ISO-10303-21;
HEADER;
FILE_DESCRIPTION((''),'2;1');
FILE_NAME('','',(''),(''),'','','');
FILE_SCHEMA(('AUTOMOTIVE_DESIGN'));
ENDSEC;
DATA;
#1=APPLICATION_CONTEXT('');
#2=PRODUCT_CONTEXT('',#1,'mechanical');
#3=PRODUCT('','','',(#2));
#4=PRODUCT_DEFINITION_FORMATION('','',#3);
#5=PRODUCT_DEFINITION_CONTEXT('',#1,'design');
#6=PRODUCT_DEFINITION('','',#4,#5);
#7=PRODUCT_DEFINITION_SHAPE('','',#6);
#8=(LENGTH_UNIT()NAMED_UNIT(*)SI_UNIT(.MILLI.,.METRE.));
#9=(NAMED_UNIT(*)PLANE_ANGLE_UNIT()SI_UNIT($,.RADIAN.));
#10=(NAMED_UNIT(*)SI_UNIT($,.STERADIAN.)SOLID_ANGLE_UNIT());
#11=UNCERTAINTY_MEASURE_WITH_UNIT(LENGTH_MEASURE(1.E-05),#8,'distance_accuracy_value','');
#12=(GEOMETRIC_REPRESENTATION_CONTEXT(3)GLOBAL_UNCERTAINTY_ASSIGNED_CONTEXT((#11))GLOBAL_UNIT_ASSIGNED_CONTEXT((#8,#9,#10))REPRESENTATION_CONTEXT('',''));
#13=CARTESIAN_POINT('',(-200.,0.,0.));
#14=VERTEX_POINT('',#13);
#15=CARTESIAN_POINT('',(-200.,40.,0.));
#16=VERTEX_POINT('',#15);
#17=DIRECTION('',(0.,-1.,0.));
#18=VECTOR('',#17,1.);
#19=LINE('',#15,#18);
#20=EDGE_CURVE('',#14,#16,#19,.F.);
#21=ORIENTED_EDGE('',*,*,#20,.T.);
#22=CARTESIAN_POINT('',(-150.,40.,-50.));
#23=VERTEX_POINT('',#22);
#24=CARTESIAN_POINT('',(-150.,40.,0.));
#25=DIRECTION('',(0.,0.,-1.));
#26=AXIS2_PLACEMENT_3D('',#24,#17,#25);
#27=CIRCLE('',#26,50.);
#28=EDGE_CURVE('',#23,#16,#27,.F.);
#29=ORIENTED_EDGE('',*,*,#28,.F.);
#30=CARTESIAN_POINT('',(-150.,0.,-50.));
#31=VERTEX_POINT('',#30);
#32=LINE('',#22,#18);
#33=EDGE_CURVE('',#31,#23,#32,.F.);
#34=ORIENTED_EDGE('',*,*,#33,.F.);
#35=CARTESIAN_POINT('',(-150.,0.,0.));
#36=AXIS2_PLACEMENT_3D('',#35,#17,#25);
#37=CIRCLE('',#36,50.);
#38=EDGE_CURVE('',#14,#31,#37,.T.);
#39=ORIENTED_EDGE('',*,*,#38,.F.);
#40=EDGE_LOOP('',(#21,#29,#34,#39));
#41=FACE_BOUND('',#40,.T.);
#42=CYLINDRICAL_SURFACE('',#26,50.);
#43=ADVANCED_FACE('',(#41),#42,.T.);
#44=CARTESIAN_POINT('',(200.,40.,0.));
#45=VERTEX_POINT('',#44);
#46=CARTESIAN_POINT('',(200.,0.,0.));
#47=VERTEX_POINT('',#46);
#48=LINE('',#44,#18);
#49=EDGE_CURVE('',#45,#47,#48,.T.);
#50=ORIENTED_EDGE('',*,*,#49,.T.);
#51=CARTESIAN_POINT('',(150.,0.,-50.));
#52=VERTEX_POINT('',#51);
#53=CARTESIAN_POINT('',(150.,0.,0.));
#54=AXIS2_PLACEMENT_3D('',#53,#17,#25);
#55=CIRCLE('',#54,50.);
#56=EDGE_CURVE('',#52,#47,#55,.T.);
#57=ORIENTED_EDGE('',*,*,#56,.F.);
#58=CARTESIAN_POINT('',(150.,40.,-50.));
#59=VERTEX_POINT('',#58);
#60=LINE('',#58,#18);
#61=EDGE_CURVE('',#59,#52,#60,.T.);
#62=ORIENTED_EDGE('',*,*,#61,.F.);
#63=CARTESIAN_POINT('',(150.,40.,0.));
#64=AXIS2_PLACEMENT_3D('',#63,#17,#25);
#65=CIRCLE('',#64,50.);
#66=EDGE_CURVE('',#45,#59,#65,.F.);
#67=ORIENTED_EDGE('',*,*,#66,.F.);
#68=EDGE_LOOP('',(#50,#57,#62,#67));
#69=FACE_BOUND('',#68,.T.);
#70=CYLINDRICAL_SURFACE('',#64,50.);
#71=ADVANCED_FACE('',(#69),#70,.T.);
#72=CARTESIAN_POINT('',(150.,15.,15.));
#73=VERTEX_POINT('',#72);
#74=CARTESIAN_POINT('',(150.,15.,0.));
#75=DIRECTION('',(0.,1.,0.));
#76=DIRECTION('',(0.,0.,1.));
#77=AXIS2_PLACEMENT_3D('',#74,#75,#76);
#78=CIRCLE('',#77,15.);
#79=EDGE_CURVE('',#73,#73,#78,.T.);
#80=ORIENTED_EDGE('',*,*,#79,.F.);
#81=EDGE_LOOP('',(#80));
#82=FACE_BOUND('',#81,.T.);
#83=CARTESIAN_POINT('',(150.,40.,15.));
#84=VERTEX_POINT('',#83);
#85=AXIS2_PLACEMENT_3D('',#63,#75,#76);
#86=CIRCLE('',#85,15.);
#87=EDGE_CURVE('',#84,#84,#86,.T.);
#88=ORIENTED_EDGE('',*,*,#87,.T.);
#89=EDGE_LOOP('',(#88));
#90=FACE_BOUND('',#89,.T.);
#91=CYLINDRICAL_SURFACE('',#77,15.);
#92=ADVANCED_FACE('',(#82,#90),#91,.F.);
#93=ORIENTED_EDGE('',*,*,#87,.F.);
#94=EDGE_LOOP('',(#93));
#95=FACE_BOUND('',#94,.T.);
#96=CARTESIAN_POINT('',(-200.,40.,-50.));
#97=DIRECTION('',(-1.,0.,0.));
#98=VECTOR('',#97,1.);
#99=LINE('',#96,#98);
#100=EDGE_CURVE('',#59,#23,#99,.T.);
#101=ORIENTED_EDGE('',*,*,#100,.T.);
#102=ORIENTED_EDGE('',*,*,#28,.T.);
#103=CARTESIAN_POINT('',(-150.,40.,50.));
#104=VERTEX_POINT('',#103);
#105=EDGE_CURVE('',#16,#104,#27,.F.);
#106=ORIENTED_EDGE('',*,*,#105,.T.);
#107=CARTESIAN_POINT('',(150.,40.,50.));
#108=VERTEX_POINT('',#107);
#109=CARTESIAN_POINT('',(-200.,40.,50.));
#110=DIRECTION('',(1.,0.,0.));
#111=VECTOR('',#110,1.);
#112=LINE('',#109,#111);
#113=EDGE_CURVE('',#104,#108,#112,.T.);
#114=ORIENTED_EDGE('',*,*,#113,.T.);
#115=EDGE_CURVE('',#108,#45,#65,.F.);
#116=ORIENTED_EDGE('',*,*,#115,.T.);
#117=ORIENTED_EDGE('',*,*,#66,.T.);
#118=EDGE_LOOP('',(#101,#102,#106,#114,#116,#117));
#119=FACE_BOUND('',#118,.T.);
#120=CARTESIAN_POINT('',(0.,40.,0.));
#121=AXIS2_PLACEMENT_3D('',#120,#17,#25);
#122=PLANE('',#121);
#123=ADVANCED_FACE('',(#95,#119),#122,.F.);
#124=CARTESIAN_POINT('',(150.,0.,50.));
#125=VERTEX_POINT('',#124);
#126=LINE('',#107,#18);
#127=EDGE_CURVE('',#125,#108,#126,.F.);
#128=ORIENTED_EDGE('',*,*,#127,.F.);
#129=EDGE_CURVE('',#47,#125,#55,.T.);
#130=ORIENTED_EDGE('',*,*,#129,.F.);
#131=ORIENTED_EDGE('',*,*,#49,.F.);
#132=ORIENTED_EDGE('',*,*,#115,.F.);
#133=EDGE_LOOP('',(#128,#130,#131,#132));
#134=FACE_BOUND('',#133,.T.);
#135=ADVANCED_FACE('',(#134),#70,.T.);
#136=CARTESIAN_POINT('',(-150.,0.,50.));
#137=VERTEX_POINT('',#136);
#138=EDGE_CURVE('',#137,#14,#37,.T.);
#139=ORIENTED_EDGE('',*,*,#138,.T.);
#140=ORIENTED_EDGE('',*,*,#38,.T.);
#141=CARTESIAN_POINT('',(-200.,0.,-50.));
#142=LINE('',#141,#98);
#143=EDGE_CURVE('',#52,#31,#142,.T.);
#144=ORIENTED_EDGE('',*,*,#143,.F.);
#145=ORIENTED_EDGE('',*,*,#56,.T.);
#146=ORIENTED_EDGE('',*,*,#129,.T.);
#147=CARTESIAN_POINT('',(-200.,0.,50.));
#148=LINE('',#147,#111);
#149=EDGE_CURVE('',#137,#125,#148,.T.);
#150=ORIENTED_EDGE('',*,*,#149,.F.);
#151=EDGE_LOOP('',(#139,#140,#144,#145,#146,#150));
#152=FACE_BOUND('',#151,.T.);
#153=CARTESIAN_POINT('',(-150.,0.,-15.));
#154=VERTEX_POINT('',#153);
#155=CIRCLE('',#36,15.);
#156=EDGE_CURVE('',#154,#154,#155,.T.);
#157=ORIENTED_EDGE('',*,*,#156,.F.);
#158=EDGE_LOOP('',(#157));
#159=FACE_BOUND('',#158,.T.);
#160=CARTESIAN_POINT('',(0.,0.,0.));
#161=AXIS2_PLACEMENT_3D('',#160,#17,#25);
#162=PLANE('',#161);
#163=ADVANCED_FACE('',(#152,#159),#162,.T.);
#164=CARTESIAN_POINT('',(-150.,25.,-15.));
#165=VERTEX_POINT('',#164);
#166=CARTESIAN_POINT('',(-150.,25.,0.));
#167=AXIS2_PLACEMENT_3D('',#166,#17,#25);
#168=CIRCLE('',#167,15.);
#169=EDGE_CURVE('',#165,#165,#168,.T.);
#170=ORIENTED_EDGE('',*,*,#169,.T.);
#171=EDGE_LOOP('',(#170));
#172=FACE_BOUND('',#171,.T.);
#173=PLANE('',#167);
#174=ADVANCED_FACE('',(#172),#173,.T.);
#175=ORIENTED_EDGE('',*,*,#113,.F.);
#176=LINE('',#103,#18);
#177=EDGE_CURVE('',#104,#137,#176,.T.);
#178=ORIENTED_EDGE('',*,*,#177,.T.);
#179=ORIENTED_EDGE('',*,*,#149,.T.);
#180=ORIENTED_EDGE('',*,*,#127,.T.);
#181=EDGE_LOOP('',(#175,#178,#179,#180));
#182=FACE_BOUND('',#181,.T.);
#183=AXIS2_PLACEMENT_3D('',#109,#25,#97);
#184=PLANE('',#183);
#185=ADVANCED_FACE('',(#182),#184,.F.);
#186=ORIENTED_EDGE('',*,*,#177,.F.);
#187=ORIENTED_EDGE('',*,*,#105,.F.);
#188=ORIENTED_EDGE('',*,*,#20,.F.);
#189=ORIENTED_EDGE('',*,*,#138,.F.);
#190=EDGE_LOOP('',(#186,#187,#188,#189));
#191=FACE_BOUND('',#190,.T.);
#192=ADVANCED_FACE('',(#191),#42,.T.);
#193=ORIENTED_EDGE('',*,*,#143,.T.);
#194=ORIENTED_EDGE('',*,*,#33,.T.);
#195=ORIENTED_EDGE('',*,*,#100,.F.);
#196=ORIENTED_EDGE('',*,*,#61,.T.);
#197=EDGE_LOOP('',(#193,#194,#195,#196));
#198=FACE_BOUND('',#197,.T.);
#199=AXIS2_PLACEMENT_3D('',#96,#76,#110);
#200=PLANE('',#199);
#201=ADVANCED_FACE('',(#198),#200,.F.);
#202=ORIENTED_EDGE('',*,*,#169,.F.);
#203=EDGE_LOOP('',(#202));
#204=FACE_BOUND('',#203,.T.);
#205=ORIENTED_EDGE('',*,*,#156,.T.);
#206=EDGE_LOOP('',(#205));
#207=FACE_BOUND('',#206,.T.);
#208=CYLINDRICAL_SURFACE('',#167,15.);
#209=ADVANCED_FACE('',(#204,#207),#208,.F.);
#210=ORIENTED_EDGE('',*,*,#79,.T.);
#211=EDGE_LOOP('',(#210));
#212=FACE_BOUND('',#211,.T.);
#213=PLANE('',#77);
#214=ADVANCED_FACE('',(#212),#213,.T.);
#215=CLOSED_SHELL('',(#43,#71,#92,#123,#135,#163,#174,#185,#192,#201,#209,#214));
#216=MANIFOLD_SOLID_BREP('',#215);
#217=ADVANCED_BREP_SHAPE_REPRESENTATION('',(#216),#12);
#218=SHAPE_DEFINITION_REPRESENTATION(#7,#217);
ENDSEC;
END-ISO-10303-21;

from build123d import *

# Parameters (mm, degrees)
ESBO_O2_W                = 400
ESBO_O2_H                = 100
RESSALTO_EXTRUS_O1_DEPTH = 40
FILETE1_R                = 50
ESBO_O5_R                = 15
CORTE_EXTRUS_O1_DEPTH    = 25
ESBO_O3_R                = 15
CORTE_EXTRUS_O2_DEPTH    = 25


with BuildPart() as part:
    # Esboço2 → Ressalto-extrusão1 (new body)
    with BuildSketch(Plane(origin=(0, 0, 0), x_dir=(1, 0, 0), z_dir=(0, 1, 0))):
        Rectangle(ESBO_O2_W, ESBO_O2_H)
    extrude(amount=RESSALTO_EXTRUS_O1_DEPTH)

    # Filete1
    filete1_edges = [part.edges().sort_by_distance(p)[0] for p in [
        (-200, 20, -50),
        (-200, 20, 50),
        (200, 20, -50),
        (200, 20, 50),
    ]]
    fillet(filete1_edges, radius=FILETE1_R - 0.0001)  # a hair under: the kernel refuses the full size

    # Esboço5 → Corte-extrusão1 (cut)
    with BuildSketch(Plane.XZ):
        with Locations(Location((-150, 0, 0), (0, 0, 270))):
            Circle(ESBO_O5_R)
    extrude(amount=-CORTE_EXTRUS_O1_DEPTH, mode=Mode.SUBTRACT)

    # Esboço3 → Corte-extrusão2 (cut)
    with BuildSketch(Plane(origin=(0, 40, 0), x_dir=(1, 0, 0), z_dir=(0, 1, 0))):
        with Locations(Location((150, 0, 0), (0, 0, 270))):
            Circle(ESBO_O3_R)
    extrude(amount=-CORTE_EXTRUS_O2_DEPTH, mode=Mode.SUBTRACT)


solid = part.part
